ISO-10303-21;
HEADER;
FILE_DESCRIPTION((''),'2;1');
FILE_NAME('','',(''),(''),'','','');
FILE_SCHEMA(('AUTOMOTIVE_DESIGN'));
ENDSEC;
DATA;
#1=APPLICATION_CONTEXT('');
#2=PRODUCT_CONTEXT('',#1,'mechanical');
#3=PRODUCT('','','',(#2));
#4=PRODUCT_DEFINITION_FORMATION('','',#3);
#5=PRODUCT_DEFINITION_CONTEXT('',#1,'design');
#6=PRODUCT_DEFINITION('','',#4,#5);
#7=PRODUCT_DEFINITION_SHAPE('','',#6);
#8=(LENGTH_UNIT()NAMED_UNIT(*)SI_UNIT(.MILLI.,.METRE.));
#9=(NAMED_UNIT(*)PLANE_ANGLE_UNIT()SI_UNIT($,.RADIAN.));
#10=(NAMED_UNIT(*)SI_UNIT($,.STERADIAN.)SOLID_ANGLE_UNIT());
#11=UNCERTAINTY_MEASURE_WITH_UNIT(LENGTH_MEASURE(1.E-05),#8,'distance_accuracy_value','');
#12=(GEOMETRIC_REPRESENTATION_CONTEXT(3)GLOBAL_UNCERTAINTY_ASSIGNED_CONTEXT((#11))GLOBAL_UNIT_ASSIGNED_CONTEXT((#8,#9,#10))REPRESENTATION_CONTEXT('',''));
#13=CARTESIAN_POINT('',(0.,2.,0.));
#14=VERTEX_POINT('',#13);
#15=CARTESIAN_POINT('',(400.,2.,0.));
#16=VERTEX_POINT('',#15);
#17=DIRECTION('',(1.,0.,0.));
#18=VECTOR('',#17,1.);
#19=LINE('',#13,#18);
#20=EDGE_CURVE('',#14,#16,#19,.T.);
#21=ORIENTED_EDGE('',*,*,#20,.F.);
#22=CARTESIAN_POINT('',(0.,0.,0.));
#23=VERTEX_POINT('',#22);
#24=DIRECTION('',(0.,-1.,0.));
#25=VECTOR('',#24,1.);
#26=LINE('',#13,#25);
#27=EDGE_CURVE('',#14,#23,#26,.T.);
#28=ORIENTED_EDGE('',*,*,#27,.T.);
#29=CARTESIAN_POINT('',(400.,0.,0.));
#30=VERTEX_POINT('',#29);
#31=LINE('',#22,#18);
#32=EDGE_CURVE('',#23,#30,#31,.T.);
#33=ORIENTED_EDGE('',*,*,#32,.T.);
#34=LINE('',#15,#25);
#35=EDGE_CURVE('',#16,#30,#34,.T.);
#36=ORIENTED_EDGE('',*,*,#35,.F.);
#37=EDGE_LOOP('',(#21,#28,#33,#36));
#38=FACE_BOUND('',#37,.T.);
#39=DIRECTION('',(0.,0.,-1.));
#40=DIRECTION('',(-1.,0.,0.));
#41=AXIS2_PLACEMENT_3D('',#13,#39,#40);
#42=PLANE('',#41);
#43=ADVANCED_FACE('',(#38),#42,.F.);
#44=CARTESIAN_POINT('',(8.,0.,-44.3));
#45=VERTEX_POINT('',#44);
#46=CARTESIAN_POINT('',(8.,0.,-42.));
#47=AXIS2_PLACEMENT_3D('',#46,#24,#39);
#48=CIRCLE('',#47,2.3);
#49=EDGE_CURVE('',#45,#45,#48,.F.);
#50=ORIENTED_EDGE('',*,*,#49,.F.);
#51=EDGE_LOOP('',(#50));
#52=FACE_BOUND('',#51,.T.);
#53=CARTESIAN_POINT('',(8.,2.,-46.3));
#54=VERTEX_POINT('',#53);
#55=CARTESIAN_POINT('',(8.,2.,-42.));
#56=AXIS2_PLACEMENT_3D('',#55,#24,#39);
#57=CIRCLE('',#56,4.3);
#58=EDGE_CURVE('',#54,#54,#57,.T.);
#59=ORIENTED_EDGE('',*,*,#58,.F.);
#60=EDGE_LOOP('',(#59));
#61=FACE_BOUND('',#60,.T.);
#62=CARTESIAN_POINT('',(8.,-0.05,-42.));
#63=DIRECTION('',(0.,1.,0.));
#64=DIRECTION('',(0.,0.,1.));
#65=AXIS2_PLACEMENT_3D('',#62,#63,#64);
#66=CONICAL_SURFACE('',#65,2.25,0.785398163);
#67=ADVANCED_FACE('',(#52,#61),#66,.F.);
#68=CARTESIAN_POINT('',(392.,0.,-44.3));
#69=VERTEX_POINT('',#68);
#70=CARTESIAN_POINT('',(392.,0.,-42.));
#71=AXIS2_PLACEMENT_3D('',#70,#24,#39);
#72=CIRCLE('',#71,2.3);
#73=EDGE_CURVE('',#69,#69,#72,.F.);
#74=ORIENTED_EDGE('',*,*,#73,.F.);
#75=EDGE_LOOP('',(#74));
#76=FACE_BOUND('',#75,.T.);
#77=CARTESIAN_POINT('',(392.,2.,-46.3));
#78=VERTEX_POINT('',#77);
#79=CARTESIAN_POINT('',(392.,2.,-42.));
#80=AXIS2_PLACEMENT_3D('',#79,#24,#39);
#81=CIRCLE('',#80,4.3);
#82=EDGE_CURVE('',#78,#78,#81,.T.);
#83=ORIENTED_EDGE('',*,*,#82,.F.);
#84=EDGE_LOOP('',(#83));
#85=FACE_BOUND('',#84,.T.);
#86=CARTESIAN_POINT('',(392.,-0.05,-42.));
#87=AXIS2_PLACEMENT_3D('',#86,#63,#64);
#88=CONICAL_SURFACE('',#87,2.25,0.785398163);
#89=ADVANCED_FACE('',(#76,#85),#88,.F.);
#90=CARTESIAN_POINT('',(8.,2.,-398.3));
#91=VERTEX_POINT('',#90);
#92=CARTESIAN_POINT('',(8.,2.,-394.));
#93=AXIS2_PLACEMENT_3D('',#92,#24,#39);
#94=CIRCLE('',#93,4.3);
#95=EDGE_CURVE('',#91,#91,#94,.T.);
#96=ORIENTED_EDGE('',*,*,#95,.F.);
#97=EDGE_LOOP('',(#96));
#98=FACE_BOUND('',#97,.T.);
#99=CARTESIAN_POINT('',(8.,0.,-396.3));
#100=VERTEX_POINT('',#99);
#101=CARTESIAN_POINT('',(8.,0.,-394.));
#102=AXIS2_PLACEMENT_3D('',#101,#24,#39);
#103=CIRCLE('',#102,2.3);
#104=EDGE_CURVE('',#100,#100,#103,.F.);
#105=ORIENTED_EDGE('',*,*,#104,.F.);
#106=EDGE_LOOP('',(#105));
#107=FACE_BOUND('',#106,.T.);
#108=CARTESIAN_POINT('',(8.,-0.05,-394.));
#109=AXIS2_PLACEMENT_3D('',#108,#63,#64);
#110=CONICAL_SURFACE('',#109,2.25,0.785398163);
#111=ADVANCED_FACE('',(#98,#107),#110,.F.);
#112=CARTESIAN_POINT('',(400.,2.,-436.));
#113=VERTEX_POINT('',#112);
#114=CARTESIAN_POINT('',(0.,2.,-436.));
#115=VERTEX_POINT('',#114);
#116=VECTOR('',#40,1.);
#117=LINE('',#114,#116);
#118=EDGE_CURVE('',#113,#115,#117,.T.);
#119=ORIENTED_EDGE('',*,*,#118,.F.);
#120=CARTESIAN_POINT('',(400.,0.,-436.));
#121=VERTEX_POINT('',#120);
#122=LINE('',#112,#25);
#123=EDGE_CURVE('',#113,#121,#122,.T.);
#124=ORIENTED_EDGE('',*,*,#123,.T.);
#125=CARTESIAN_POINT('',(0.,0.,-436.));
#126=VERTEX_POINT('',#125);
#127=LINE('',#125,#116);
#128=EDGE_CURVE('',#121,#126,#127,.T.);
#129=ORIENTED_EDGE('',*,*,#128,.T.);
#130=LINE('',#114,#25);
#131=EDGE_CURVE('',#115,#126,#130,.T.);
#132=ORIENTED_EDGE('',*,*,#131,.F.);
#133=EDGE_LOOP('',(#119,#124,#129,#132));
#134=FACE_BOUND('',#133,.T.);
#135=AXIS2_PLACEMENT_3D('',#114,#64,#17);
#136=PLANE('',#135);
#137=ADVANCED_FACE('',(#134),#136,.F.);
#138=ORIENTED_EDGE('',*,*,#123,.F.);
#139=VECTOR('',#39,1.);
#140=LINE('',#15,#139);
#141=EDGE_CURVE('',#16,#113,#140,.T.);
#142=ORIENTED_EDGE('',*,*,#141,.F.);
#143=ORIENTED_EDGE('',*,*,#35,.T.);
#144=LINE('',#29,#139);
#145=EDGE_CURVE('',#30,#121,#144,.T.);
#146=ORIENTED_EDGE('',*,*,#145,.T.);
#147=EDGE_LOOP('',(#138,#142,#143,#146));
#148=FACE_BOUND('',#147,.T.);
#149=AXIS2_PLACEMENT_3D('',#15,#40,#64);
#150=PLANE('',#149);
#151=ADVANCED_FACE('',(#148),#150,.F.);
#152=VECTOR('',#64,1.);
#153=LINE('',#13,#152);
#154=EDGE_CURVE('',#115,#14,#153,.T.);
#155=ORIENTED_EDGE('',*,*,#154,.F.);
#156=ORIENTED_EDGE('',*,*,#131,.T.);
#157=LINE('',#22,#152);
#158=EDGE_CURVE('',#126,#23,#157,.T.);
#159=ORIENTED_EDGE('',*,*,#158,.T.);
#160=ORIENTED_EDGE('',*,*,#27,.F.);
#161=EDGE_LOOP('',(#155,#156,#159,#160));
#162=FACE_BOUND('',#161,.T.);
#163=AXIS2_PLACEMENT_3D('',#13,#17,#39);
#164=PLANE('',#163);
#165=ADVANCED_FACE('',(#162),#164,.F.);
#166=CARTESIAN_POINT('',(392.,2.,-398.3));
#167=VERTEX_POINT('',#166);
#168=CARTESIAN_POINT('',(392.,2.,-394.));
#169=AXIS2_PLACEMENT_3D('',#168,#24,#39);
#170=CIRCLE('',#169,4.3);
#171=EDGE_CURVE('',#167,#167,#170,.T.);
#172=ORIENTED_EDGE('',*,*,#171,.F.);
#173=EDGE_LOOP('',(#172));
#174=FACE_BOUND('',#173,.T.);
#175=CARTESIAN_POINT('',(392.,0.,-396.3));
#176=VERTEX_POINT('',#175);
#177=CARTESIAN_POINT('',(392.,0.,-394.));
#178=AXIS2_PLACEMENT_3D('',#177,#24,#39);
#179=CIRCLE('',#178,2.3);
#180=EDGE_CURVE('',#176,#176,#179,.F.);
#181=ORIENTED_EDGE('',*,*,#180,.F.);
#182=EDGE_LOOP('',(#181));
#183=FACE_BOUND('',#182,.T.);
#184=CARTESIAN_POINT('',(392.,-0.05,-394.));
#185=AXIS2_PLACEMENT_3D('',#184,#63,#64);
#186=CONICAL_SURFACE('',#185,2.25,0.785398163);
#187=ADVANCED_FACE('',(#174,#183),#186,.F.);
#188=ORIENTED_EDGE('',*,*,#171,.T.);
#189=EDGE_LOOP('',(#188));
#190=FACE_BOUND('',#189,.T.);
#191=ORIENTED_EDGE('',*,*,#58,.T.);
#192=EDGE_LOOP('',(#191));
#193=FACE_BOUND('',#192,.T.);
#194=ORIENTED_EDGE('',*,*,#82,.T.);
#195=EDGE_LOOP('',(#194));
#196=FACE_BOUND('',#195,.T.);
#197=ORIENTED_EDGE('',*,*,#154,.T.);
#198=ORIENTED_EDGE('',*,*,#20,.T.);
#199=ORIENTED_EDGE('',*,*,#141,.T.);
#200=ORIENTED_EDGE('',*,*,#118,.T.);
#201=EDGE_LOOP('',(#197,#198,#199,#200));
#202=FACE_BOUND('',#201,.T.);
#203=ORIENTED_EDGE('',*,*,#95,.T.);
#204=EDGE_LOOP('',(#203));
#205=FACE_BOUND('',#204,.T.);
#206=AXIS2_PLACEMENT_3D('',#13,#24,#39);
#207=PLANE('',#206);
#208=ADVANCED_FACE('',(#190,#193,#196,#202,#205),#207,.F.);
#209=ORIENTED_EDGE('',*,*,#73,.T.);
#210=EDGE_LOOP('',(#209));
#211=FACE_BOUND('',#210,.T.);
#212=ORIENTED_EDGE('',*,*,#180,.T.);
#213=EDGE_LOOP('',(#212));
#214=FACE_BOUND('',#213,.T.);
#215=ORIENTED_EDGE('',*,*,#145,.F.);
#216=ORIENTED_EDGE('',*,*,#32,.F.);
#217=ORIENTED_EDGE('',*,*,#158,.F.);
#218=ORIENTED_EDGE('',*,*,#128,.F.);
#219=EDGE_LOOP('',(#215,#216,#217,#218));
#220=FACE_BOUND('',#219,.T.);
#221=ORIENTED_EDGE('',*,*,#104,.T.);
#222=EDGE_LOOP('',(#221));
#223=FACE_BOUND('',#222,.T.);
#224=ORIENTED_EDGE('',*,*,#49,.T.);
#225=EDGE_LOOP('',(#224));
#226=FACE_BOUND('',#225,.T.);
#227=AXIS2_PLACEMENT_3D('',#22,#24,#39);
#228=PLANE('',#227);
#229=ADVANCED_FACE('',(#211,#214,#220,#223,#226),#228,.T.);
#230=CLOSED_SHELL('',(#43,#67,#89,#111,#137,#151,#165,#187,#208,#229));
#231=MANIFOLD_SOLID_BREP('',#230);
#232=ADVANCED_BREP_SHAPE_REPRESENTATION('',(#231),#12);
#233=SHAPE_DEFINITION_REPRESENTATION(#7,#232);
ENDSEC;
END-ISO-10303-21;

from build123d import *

# Parameters (mm, degrees)
SKETCH_1_W      = 400
SKETCH_1_H      = 436
SKETCH_1_R      = 2.25
EXTRUDE_1_DEPTH = 2
CHAMFER_1_SIZE  = 2.05


with BuildPart() as part:
    # Эскиз1 → Бобышка-Вытянуть1 (new body)
    with BuildSketch(Plane(origin=(0, 0, 0), x_dir=(1, 0, 0), z_dir=(0, 1, 0))):
        with Locations((200, 218)):
            Rectangle(SKETCH_1_W, SKETCH_1_H)
        with Locations(Location((8, 394, 0), (0, 0, 270))):
            Circle(SKETCH_1_R, mode=Mode.SUBTRACT)
        with Locations(Location((392, 394, 0), (0, 0, 270))):
            Circle(SKETCH_1_R, mode=Mode.SUBTRACT)
        with Locations(Location((392, 42, 0), (0, 0, 270))):
            Circle(SKETCH_1_R, mode=Mode.SUBTRACT)
        with Locations(Location((8, 42, 0), (0, 0, 270))):
            Circle(SKETCH_1_R, mode=Mode.SUBTRACT)
    extrude(amount=EXTRUDE_1_DEPTH)

    # Фаска1
    # the kernel refuses this chamfer: 2.05 mm, written as the material it takes off along each edge
    with BuildSketch(Plane(origin=(392, 2, -394), x_dir=(0, 0, 1), z_dir=(-1, 0, 0))) as chamfer_1_piece_1:
        Polygon((2.25, -CHAMFER_1_SIZE), (2.25 + CHAMFER_1_SIZE, 0), (2.25, 0), align=None)
    revolve(axis=Axis((392, 2, -394), (0, 1, 0)), mode=Mode.SUBTRACT)
    with BuildSketch(Plane(origin=(392, 2, -42), x_dir=(0, 0, 1), z_dir=(-1, 0, 0))) as chamfer_1_piece_2:
        Polygon((2.25, -CHAMFER_1_SIZE), (2.25 + CHAMFER_1_SIZE, 0), (2.25, 0), align=None)
    revolve(axis=Axis((392, 2, -42), (0, 1, 0)), mode=Mode.SUBTRACT)
    with BuildSketch(Plane(origin=(8, 2, -394), x_dir=(0, 0, 1), z_dir=(-1, 0, 0))) as chamfer_1_piece_3:
        Polygon((2.25, -CHAMFER_1_SIZE), (2.25 + CHAMFER_1_SIZE, 0), (2.25, 0), align=None)
    revolve(axis=Axis((8, 2, -394), (0, 1, 0)), mode=Mode.SUBTRACT)
    with BuildSketch(Plane(origin=(8, 2, -42), x_dir=(0, 0, 1), z_dir=(-1, 0, 0))) as chamfer_1_piece_4:
        Polygon((2.25, -CHAMFER_1_SIZE), (2.25 + CHAMFER_1_SIZE, 0), (2.25, 0), align=None)
    revolve(axis=Axis((8, 2, -42), (0, 1, 0)), mode=Mode.SUBTRACT)


solid = part.part
